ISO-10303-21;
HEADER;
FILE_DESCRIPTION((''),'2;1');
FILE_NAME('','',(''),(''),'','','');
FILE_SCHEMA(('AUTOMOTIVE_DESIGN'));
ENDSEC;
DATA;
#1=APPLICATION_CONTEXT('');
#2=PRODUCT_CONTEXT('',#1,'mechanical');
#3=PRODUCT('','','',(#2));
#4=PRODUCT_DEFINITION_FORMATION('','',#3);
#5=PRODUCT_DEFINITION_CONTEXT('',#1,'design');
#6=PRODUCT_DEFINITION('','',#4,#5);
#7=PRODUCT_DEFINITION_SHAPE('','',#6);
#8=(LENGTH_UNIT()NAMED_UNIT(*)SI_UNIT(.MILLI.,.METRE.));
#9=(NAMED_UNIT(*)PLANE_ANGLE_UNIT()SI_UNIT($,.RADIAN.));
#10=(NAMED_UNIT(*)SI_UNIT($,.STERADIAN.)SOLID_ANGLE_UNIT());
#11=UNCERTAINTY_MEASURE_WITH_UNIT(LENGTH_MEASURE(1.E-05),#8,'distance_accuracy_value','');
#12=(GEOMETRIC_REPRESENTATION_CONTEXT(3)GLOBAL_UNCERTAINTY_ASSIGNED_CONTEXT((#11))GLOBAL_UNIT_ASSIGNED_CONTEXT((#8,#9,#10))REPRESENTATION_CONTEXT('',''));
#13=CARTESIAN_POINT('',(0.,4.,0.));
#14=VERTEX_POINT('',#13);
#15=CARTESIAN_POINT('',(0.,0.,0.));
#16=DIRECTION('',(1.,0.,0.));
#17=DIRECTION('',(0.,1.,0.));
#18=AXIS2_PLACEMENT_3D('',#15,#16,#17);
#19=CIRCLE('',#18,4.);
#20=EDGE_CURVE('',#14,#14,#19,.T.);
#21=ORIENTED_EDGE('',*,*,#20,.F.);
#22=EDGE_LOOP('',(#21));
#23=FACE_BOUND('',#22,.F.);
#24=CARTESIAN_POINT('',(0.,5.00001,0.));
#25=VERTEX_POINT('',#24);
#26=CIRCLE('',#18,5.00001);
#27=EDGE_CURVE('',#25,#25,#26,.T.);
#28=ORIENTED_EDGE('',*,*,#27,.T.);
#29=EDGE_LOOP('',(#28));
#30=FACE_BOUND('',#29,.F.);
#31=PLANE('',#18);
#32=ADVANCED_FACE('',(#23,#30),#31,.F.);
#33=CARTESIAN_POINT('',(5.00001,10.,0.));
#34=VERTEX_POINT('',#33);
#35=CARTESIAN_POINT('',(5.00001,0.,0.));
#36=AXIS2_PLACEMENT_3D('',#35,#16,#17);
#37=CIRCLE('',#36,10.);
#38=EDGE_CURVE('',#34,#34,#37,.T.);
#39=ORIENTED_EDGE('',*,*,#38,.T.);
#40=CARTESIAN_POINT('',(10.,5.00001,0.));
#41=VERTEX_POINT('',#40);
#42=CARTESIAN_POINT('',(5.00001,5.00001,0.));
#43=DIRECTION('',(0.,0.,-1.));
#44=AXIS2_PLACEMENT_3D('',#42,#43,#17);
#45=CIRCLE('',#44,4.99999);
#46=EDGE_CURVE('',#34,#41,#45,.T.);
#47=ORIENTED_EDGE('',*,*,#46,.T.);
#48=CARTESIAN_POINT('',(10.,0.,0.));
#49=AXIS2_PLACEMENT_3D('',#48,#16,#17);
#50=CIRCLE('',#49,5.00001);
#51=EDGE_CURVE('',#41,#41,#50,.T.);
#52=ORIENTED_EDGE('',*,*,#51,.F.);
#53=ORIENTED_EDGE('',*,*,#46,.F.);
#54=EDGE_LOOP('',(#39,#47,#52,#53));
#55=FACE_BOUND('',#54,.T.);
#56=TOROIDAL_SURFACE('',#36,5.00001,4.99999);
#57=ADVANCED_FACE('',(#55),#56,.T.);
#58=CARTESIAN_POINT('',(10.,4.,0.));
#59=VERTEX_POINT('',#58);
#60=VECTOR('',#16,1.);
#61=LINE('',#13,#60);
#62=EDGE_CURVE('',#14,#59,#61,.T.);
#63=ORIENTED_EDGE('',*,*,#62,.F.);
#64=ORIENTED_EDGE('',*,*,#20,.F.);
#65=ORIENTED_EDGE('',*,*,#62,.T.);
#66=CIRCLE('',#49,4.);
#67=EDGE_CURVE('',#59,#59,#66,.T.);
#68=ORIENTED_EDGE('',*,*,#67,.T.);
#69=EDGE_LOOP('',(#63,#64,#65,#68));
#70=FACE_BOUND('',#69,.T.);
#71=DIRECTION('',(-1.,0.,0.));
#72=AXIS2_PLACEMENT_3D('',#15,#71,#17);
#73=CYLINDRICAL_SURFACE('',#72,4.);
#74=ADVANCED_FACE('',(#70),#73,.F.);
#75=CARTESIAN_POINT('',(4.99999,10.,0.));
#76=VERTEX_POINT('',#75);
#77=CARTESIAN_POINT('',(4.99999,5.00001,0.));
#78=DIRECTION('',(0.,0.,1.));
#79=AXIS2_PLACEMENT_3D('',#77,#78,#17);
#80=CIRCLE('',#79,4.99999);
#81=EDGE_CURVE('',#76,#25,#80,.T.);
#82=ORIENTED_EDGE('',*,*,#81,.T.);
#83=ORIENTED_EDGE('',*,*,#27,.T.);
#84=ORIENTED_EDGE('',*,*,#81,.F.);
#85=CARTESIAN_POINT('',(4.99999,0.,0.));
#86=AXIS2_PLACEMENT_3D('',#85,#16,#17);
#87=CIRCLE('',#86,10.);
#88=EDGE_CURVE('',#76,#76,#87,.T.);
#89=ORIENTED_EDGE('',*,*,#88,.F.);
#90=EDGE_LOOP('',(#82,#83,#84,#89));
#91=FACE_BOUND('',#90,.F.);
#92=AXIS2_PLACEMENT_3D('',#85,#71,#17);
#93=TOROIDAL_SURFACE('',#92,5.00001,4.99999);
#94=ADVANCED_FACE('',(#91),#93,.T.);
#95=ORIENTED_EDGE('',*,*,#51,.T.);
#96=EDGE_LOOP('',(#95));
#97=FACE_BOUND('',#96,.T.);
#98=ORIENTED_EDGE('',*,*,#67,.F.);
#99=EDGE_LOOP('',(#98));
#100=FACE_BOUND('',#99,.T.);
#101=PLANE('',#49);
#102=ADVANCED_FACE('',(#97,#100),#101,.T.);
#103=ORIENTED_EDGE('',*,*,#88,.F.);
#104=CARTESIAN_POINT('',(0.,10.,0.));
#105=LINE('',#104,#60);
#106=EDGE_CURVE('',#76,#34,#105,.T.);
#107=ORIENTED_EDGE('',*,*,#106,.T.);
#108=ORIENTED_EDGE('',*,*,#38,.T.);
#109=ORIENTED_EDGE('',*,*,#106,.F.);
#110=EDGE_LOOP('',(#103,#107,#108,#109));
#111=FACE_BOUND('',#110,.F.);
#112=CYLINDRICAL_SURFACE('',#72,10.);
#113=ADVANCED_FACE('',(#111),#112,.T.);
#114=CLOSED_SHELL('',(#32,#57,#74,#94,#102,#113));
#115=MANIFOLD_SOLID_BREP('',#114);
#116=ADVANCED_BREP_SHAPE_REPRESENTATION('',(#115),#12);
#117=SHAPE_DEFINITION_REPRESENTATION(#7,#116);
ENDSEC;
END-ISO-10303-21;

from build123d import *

# Parameters (mm, degrees)
F0_R     = 10
F0_R_2   = 4
F1_DEPTH = 10
F2_R     = 4.99999


# Not quite as in the source:
# - a fillet or chamfer is up to 0.001 mm smaller than in the source, because OpenCascade refuses the exact size


with BuildPart() as f1:
    # F0 (on Right) → F1 (new body)
    with BuildSketch(Plane.YZ):
        Circle(F0_R)
        Circle(F0_R_2, mode=Mode.SUBTRACT)
    extrude(amount=F1_DEPTH)

    # F2 (radius 5 in the source; OpenCascade refuses exactly that, so slightly less here)
    f2_edges = [f1.edges().sort_by_distance(p)[0] for p in [
        (10, -10, 0),
        (0, -10, 0),
    ]]
    fillet(f2_edges, radius=F2_R)


solid = f1.part
